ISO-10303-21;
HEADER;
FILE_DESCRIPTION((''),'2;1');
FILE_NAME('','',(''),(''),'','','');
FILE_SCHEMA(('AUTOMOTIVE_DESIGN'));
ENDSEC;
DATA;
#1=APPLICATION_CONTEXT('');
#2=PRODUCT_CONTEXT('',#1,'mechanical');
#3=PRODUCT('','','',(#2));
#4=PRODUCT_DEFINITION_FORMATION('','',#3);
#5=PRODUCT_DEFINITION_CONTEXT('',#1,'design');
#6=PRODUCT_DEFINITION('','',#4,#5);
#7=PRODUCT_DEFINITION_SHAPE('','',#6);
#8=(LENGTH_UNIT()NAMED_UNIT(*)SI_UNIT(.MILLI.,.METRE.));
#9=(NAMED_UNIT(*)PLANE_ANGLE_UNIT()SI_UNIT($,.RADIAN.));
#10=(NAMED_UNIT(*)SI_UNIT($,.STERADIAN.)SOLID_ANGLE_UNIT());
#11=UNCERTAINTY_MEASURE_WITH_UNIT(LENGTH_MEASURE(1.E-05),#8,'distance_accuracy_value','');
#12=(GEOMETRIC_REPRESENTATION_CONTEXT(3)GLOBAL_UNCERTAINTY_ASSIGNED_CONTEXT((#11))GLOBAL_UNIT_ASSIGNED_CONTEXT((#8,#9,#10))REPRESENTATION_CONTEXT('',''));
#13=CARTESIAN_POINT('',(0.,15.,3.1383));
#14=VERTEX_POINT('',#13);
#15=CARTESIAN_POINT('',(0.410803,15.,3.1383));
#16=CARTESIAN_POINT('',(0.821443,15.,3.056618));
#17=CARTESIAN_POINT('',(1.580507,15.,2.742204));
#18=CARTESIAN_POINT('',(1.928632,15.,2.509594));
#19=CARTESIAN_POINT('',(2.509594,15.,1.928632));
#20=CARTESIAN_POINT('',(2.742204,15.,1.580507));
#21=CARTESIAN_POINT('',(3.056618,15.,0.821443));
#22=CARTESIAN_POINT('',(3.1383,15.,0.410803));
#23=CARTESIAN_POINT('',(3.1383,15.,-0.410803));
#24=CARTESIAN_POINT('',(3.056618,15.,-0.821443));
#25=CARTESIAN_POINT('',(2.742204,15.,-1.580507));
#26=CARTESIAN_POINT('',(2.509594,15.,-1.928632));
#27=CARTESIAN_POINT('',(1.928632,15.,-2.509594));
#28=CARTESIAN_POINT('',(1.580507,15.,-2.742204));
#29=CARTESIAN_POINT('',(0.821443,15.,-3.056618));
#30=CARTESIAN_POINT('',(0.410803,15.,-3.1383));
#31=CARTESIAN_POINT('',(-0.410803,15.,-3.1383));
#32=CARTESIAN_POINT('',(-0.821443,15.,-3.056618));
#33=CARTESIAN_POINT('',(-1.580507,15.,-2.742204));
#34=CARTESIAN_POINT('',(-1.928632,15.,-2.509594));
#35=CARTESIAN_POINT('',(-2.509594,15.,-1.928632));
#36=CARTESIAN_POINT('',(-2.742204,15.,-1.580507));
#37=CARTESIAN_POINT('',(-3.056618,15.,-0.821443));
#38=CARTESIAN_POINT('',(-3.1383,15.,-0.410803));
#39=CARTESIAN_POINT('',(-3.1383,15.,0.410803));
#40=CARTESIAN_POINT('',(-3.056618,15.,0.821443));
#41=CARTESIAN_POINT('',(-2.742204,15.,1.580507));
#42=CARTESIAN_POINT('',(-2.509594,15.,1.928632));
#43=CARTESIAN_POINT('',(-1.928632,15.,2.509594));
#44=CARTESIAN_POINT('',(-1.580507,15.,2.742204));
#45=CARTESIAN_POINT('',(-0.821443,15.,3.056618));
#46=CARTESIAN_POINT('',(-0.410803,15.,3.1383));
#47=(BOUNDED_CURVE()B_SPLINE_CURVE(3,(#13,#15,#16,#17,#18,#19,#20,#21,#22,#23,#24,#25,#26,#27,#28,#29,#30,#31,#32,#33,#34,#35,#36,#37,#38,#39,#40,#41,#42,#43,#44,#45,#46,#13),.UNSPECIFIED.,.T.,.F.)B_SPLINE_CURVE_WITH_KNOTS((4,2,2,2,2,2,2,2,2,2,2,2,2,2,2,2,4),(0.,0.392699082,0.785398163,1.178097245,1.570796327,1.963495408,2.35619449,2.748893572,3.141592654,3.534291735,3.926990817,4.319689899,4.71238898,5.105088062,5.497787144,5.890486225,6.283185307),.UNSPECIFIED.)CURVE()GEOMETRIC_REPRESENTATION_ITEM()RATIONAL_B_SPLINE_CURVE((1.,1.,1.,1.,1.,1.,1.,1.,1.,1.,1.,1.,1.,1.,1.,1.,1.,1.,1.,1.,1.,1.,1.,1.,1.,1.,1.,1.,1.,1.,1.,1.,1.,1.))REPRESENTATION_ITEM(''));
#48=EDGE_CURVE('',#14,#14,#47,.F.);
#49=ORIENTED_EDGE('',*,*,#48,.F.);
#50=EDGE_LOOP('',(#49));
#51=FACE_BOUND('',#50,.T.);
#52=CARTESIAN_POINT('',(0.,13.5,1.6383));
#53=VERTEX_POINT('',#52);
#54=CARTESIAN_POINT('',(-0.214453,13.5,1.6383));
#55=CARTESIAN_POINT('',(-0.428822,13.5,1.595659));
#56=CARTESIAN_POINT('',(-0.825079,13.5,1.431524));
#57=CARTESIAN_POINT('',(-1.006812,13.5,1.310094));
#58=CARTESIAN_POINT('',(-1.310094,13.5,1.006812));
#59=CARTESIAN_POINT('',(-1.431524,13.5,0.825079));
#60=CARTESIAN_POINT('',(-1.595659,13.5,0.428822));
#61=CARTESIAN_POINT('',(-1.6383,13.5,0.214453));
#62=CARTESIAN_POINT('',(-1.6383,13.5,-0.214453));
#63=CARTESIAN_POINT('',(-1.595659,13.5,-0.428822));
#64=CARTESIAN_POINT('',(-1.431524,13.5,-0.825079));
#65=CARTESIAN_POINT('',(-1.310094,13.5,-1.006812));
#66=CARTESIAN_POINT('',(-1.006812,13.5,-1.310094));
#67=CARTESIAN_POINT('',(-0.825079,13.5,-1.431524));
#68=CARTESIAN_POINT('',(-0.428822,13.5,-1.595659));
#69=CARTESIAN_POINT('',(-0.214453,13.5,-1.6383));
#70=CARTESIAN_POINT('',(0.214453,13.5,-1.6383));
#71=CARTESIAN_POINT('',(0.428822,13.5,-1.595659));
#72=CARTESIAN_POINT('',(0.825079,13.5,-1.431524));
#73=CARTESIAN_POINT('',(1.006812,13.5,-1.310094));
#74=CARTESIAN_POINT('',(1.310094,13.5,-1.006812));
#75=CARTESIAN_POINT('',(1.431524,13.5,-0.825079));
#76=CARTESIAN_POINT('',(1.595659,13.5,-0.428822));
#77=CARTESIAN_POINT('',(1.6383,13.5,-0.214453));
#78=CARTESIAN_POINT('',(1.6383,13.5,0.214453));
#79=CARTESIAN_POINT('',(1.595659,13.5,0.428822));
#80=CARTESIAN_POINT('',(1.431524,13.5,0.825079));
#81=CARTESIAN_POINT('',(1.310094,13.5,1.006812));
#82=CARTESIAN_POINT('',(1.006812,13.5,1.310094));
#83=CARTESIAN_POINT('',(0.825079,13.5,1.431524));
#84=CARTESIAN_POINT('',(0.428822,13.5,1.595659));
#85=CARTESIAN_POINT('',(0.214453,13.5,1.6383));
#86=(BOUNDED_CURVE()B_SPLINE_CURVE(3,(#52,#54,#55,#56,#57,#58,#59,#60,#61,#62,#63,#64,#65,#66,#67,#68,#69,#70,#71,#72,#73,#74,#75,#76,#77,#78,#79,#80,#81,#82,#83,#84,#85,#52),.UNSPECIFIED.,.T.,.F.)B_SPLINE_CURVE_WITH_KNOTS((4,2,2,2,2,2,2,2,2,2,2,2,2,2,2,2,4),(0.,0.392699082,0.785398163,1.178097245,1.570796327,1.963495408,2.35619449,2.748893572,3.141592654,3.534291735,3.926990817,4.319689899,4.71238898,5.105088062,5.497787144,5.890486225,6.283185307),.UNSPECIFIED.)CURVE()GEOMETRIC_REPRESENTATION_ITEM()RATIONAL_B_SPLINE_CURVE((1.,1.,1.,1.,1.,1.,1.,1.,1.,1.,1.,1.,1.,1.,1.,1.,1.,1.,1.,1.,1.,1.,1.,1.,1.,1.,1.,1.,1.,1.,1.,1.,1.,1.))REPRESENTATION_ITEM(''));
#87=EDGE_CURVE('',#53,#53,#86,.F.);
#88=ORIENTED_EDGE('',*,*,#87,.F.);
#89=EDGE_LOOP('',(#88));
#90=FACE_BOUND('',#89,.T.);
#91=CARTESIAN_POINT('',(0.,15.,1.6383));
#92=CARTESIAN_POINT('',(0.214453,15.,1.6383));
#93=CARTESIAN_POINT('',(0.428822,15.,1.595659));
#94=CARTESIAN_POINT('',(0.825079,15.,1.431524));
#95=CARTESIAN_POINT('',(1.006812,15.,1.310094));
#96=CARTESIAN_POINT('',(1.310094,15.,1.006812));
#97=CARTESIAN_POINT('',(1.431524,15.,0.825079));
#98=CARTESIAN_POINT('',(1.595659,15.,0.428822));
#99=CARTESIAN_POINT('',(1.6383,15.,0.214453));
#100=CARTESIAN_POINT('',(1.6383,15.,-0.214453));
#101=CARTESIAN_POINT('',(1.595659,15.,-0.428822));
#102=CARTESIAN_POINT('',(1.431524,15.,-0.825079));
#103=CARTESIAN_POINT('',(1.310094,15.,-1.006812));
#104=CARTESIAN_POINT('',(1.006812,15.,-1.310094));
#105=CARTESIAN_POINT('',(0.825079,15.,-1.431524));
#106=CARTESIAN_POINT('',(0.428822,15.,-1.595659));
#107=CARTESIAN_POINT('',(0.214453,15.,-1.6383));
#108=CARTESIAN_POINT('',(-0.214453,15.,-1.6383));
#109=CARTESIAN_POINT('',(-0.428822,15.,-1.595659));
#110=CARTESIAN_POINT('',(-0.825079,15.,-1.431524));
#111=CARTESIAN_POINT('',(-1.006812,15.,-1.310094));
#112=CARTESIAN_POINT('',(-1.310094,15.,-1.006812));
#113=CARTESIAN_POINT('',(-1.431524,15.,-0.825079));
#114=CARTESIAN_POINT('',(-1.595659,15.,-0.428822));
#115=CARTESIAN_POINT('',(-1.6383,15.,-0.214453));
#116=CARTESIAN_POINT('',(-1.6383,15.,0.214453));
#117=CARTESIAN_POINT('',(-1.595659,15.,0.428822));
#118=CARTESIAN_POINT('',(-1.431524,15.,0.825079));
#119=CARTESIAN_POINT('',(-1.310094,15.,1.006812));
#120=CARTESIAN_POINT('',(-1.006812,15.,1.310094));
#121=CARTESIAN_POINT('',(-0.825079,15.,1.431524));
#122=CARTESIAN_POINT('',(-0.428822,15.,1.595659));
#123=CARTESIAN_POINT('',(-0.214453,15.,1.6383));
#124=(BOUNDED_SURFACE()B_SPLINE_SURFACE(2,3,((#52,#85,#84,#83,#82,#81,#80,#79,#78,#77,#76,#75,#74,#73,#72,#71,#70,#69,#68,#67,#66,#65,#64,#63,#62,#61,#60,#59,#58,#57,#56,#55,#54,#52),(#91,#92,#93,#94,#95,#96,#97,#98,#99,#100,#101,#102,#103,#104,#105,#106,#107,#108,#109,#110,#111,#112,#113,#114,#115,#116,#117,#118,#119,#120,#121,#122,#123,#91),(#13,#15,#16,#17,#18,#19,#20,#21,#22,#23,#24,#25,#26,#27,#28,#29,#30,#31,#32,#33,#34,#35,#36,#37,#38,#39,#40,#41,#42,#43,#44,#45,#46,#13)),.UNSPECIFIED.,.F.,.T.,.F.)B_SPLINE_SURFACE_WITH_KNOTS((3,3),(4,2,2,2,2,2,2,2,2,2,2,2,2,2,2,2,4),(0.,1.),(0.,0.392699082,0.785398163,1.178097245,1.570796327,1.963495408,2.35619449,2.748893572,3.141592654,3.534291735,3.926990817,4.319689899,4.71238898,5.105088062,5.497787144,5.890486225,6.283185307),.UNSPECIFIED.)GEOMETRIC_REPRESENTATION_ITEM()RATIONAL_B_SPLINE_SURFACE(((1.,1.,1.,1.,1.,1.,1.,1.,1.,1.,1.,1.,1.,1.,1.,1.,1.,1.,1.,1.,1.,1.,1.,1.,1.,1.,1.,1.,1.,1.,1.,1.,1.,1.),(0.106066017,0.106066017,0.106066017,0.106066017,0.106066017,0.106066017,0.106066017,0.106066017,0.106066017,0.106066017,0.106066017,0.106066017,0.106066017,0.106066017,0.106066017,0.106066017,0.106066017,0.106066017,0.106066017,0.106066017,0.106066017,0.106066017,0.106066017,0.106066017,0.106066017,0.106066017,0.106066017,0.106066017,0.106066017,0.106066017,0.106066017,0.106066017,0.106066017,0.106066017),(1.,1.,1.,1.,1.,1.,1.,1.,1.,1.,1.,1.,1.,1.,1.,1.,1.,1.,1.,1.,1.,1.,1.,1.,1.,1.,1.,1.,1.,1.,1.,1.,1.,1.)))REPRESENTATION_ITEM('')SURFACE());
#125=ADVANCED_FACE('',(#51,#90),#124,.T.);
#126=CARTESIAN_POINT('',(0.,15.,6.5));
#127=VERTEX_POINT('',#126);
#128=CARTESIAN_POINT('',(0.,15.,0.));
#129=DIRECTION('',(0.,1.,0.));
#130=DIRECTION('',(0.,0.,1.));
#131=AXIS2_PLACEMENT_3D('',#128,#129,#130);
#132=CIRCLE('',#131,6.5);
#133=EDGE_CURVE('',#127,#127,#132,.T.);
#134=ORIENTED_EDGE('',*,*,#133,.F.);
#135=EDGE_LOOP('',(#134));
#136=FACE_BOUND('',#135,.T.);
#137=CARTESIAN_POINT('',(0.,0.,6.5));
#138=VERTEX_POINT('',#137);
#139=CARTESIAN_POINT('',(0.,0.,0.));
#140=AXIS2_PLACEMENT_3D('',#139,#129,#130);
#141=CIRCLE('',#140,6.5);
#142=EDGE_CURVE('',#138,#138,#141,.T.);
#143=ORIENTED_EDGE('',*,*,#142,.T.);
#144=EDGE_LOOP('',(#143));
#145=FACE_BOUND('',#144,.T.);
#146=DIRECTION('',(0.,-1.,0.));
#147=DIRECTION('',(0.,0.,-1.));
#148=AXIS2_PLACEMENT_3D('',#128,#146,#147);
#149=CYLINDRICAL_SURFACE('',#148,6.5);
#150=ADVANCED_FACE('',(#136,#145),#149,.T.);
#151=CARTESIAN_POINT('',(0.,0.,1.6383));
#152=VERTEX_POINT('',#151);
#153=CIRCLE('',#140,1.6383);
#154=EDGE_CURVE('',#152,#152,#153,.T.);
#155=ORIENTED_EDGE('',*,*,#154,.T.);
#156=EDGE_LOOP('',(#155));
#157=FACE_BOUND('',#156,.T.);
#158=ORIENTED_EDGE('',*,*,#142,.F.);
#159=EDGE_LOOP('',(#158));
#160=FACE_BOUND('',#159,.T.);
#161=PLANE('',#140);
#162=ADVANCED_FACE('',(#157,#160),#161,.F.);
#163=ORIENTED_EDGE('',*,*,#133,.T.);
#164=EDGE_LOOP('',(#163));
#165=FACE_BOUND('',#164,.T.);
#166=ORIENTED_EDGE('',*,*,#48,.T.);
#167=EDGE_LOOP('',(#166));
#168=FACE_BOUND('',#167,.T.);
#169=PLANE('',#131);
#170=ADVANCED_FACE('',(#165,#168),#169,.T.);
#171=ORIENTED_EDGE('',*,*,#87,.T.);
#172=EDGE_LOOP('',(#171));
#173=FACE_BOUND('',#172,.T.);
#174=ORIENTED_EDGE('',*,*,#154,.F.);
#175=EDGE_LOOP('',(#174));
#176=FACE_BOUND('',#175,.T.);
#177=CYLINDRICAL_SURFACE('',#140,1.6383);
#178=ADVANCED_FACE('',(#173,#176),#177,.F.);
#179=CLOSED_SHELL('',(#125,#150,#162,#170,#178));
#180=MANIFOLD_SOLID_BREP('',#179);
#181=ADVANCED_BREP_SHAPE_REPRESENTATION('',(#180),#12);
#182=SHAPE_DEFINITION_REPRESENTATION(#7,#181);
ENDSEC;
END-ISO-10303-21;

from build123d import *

# Parameters (mm, degrees)
SKETCH1_R               = 6.5
BOSS_EXTRUDE1_DEPTH     = 15
CUT_EXTRUDE1_DEPTH      = 18.592612086
CUT_EXTRUDE1_DEPTH_BACK = 18.592612086
SKETCH2_R               = 1.6383
FILLET1_SIZE            = 1.5


with BuildPart() as part:
    # Sketch1 → Boss-Extrude1 (new body)
    with BuildSketch(Plane(origin=(0, 0, 0), x_dir=(1, 0, 0), z_dir=(0, 1, 0))):
        with Locations(Location((0, 0, 0), (0, 0, 270))):
            Circle(SKETCH1_R)
    extrude(amount=BOSS_EXTRUDE1_DEPTH)

    # Sketch2 → Cut-Extrude1 (cut, two sides: drawn at the far end of the back side and taken through both)
    with BuildSketch(Plane(origin=(0, 15, 0), x_dir=(1, 0, 0), z_dir=(0, 1, 0)).offset(-CUT_EXTRUDE1_DEPTH_BACK)):
        with Locations(Location((0, 0, 0), (0, 0, 270))):
            Circle(SKETCH2_R)
    extrude(amount=CUT_EXTRUDE1_DEPTH + CUT_EXTRUDE1_DEPTH_BACK, mode=Mode.SUBTRACT)

    # Fillet1
    # a fillet whose section is not a circle: 1.5 mm, written as the material it takes off along each edge
    with BuildSketch(Plane(origin=(0, 15, 0), x_dir=(0, 0, 1), z_dir=(-1, 0, 0))) as fillet1_piece_1:
        with BuildLine():
            Bezier((1.6383 + FILLET1_SIZE, 0), (1.6383, 0), (1.6383, -FILLET1_SIZE), weights=[1, 0.106066017, 1])
            Line((1.6383, -FILLET1_SIZE), (1.6383, 0))
            Line((1.6383, 0), (1.6383 + FILLET1_SIZE, 0))
        make_face()
    revolve(axis=Axis((0, 15, 0), (0, 1, 0)), mode=Mode.SUBTRACT)


solid = part.part
